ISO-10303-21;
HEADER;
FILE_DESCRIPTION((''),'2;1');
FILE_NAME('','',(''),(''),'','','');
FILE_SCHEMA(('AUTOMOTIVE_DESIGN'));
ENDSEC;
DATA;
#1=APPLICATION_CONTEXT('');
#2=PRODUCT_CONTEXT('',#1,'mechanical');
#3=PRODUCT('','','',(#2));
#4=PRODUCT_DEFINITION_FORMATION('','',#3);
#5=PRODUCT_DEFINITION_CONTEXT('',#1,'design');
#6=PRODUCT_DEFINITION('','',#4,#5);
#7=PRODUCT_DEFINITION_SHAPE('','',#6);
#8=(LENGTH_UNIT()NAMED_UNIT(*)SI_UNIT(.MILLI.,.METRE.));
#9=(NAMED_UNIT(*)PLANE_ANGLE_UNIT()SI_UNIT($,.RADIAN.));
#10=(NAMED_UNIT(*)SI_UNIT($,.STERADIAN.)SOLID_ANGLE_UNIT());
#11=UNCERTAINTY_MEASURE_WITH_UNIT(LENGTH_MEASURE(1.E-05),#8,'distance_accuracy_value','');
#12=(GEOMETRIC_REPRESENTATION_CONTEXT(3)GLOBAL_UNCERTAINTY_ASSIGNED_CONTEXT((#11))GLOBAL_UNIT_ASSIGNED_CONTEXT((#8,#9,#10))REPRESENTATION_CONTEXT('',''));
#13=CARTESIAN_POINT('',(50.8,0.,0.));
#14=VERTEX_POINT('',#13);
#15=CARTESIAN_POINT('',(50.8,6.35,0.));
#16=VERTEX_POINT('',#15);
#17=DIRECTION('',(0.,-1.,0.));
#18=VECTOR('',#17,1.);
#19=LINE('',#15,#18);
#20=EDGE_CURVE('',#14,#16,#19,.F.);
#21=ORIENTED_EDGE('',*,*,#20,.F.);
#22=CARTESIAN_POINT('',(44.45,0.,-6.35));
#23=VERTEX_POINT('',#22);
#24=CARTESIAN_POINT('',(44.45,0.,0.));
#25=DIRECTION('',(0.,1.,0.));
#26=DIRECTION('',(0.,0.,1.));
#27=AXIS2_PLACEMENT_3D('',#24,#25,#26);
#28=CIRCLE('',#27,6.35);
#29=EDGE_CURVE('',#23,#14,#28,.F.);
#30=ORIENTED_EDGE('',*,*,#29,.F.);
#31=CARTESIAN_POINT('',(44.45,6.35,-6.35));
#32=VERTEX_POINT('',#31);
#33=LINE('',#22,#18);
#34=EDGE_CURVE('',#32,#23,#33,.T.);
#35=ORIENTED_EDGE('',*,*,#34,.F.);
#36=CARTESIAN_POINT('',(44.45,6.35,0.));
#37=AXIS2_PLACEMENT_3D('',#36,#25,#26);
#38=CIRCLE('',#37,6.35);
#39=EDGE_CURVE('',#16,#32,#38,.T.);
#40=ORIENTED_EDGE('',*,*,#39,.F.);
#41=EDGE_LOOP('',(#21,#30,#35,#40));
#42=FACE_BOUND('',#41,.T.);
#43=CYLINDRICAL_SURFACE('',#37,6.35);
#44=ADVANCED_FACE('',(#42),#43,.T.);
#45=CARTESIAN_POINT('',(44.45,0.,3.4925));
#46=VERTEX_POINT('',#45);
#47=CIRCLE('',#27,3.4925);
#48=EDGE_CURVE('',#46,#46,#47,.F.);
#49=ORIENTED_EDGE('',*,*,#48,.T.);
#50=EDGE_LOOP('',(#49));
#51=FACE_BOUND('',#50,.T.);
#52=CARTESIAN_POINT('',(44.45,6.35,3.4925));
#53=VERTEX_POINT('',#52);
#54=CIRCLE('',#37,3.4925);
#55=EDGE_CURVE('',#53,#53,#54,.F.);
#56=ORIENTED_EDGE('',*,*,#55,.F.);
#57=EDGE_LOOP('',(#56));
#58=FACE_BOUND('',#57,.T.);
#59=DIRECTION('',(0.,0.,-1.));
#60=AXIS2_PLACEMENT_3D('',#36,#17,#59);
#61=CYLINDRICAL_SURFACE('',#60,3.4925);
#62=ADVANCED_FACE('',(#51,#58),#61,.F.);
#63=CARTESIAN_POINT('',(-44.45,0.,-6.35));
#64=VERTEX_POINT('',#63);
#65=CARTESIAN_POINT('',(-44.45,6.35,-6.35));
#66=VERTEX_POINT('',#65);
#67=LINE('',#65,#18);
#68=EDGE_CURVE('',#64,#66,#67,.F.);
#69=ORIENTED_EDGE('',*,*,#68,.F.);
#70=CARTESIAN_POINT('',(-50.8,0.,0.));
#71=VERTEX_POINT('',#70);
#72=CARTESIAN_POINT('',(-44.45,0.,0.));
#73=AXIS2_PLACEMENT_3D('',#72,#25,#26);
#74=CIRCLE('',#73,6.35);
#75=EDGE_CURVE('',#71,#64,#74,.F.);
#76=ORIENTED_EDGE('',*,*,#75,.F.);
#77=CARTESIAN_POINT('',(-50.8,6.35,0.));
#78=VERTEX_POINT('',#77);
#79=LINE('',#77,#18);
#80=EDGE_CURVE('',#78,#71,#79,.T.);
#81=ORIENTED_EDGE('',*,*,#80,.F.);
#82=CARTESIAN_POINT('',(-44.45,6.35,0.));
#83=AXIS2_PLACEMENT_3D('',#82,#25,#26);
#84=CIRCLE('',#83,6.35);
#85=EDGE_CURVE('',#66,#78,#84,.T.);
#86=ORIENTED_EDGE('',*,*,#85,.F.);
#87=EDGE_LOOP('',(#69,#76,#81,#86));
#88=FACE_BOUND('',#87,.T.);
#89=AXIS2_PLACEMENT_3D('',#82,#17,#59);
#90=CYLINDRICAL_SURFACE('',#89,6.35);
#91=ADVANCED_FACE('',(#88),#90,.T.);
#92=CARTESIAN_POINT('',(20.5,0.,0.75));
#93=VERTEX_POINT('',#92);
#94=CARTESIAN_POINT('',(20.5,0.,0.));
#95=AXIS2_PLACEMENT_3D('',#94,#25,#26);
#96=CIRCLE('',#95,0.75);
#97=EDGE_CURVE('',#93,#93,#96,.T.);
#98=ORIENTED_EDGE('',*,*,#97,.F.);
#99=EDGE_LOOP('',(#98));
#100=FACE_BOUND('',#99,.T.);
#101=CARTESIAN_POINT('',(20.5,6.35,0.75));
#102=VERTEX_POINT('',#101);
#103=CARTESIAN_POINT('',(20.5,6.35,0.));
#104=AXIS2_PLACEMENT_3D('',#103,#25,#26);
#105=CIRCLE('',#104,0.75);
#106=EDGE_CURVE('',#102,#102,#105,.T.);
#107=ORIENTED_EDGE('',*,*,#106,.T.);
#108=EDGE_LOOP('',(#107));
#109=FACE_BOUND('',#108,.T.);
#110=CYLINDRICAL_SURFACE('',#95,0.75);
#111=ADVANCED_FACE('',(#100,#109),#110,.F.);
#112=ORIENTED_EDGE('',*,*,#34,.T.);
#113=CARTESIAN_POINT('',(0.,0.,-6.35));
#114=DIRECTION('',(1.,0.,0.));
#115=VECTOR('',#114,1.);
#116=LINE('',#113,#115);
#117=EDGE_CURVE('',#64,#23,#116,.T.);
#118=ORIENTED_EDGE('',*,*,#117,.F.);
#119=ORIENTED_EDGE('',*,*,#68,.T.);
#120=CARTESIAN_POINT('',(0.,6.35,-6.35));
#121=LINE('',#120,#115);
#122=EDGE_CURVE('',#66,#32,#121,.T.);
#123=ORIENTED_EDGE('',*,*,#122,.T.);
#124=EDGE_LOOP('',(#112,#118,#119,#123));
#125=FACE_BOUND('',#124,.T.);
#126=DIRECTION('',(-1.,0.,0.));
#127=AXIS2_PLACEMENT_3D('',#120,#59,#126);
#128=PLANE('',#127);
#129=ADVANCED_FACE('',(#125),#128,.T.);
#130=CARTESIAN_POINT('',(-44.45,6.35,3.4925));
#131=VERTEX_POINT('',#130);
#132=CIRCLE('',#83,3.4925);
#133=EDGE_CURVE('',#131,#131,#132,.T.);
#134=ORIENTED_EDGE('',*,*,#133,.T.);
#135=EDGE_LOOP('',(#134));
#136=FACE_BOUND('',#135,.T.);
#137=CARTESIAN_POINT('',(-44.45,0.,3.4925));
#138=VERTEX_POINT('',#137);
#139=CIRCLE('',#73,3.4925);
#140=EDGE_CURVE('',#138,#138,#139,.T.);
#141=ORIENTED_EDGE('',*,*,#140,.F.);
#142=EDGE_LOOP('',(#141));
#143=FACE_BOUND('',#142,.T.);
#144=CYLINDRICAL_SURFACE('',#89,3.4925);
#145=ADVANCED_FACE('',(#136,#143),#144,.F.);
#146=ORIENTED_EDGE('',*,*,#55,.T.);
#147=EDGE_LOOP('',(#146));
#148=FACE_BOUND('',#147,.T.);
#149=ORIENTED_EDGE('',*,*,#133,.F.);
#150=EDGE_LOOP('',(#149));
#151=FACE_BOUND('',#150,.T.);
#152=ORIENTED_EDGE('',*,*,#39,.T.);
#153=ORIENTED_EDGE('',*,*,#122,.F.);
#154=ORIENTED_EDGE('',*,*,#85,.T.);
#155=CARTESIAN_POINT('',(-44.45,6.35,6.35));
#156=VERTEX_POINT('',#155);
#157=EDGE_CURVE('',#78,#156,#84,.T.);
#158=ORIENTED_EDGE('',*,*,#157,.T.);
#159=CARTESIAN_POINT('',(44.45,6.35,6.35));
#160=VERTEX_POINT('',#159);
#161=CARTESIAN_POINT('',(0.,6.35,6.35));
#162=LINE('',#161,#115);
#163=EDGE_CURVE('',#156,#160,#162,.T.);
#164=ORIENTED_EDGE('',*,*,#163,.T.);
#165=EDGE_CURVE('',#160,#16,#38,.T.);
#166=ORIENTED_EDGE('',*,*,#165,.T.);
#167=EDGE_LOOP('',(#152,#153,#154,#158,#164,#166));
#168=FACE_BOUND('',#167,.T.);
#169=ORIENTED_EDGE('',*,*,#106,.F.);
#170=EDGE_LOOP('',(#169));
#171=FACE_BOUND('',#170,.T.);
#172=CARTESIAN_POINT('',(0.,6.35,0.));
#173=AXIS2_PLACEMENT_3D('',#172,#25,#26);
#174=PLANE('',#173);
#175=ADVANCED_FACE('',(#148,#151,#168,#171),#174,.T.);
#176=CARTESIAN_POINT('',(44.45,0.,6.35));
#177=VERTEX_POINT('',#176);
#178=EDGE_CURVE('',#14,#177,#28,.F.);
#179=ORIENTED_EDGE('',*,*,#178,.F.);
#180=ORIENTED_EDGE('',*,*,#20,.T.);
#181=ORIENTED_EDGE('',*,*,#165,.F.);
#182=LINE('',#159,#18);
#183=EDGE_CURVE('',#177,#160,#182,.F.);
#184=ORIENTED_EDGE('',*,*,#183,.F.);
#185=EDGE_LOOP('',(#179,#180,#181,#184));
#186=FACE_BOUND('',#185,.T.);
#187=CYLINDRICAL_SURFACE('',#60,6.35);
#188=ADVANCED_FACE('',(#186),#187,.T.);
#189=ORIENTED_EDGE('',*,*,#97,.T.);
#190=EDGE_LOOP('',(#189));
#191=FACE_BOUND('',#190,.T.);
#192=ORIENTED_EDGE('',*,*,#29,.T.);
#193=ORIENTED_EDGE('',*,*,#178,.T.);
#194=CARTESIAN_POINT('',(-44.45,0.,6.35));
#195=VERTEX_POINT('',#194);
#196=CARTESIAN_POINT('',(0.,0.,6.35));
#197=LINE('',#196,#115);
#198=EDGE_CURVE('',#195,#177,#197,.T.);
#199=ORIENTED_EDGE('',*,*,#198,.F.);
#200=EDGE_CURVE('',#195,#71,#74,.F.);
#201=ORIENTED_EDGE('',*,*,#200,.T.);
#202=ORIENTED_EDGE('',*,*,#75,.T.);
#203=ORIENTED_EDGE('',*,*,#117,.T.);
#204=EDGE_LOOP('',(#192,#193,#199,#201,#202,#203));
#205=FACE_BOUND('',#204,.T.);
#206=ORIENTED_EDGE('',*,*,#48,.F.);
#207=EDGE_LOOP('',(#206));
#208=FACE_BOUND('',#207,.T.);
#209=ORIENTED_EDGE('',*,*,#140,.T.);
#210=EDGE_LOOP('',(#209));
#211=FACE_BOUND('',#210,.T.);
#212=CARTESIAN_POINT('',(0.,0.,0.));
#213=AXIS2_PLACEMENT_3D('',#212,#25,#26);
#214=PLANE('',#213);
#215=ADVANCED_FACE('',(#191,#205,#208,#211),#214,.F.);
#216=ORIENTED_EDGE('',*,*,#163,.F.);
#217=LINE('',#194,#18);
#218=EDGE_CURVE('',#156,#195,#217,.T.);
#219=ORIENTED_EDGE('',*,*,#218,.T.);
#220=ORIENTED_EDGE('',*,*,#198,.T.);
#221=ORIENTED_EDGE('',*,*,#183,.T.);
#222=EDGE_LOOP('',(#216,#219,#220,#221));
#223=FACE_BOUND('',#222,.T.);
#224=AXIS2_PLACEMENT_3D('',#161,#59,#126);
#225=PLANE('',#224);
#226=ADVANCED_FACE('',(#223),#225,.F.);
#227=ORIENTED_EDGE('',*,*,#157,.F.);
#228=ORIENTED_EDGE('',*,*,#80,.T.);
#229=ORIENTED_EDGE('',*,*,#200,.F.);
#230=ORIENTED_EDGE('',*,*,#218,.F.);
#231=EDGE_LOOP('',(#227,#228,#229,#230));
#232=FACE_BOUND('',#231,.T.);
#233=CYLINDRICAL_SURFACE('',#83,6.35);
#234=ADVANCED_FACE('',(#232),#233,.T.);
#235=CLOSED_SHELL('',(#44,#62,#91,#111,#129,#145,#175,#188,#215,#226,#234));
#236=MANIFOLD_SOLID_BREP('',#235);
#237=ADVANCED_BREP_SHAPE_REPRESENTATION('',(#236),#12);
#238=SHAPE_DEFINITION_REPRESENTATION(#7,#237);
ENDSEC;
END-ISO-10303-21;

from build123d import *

# Parameters (mm, degrees)
SKETCH1_R           = 3.4925
BOSS_EXTRUDE1_DEPTH = 6.35
FILLET1_R           = 6.35
SKETCH3_R           = 0.75
CUT_EXTRUDE1_DEPTH  = 52.587643869


with BuildPart() as part:
    # Sketch1 → Boss-Extrude1 (new body)
    with BuildSketch(Plane(origin=(0, 0, 0), x_dir=(1, 0, 0), z_dir=(0, 1, 0))):
        Polygon((-50.8, 6.35), (-50.8, -6.35), (-6.35, -6.35), (6.35, -6.35), (50.8, -6.35), (50.8, 6.35), (6.35, 6.35), (-6.35, 6.35), align=None)
        with Locations(Location((-44.45, 0, 0), (0, 0, 270))):
            Circle(SKETCH1_R, mode=Mode.SUBTRACT)
        with Locations(Location((44.45, 0, 0), (0, 0, 270))):
            Circle(SKETCH1_R, mode=Mode.SUBTRACT)
    extrude(amount=BOSS_EXTRUDE1_DEPTH)

    # Fillet1
    fillet1_edges = [part.edges().sort_by_distance(p)[0] for p in [
        (50.8, 3.175, -6.35),
        (-50.8, 3.175, -6.35),
        (-50.8, 3.175, 6.35),
        (50.8, 3.175, 6.35),
    ]]
    fillet(fillet1_edges, radius=FILLET1_R - 0.0001)  # a hair under: the kernel refuses the full size

    # Sketch3 → Cut-Extrude1 (cut, through all)
    with BuildSketch(Plane(origin=(0, 6.35, 0), x_dir=(1, 0, 0), z_dir=(0, 1, 0))):
        with Locations(Location((20.5, 0, 0), (0, 0, 270))):
            Circle(SKETCH3_R)
    extrude(amount=-CUT_EXTRUDE1_DEPTH, mode=Mode.SUBTRACT)


solid = part.part
